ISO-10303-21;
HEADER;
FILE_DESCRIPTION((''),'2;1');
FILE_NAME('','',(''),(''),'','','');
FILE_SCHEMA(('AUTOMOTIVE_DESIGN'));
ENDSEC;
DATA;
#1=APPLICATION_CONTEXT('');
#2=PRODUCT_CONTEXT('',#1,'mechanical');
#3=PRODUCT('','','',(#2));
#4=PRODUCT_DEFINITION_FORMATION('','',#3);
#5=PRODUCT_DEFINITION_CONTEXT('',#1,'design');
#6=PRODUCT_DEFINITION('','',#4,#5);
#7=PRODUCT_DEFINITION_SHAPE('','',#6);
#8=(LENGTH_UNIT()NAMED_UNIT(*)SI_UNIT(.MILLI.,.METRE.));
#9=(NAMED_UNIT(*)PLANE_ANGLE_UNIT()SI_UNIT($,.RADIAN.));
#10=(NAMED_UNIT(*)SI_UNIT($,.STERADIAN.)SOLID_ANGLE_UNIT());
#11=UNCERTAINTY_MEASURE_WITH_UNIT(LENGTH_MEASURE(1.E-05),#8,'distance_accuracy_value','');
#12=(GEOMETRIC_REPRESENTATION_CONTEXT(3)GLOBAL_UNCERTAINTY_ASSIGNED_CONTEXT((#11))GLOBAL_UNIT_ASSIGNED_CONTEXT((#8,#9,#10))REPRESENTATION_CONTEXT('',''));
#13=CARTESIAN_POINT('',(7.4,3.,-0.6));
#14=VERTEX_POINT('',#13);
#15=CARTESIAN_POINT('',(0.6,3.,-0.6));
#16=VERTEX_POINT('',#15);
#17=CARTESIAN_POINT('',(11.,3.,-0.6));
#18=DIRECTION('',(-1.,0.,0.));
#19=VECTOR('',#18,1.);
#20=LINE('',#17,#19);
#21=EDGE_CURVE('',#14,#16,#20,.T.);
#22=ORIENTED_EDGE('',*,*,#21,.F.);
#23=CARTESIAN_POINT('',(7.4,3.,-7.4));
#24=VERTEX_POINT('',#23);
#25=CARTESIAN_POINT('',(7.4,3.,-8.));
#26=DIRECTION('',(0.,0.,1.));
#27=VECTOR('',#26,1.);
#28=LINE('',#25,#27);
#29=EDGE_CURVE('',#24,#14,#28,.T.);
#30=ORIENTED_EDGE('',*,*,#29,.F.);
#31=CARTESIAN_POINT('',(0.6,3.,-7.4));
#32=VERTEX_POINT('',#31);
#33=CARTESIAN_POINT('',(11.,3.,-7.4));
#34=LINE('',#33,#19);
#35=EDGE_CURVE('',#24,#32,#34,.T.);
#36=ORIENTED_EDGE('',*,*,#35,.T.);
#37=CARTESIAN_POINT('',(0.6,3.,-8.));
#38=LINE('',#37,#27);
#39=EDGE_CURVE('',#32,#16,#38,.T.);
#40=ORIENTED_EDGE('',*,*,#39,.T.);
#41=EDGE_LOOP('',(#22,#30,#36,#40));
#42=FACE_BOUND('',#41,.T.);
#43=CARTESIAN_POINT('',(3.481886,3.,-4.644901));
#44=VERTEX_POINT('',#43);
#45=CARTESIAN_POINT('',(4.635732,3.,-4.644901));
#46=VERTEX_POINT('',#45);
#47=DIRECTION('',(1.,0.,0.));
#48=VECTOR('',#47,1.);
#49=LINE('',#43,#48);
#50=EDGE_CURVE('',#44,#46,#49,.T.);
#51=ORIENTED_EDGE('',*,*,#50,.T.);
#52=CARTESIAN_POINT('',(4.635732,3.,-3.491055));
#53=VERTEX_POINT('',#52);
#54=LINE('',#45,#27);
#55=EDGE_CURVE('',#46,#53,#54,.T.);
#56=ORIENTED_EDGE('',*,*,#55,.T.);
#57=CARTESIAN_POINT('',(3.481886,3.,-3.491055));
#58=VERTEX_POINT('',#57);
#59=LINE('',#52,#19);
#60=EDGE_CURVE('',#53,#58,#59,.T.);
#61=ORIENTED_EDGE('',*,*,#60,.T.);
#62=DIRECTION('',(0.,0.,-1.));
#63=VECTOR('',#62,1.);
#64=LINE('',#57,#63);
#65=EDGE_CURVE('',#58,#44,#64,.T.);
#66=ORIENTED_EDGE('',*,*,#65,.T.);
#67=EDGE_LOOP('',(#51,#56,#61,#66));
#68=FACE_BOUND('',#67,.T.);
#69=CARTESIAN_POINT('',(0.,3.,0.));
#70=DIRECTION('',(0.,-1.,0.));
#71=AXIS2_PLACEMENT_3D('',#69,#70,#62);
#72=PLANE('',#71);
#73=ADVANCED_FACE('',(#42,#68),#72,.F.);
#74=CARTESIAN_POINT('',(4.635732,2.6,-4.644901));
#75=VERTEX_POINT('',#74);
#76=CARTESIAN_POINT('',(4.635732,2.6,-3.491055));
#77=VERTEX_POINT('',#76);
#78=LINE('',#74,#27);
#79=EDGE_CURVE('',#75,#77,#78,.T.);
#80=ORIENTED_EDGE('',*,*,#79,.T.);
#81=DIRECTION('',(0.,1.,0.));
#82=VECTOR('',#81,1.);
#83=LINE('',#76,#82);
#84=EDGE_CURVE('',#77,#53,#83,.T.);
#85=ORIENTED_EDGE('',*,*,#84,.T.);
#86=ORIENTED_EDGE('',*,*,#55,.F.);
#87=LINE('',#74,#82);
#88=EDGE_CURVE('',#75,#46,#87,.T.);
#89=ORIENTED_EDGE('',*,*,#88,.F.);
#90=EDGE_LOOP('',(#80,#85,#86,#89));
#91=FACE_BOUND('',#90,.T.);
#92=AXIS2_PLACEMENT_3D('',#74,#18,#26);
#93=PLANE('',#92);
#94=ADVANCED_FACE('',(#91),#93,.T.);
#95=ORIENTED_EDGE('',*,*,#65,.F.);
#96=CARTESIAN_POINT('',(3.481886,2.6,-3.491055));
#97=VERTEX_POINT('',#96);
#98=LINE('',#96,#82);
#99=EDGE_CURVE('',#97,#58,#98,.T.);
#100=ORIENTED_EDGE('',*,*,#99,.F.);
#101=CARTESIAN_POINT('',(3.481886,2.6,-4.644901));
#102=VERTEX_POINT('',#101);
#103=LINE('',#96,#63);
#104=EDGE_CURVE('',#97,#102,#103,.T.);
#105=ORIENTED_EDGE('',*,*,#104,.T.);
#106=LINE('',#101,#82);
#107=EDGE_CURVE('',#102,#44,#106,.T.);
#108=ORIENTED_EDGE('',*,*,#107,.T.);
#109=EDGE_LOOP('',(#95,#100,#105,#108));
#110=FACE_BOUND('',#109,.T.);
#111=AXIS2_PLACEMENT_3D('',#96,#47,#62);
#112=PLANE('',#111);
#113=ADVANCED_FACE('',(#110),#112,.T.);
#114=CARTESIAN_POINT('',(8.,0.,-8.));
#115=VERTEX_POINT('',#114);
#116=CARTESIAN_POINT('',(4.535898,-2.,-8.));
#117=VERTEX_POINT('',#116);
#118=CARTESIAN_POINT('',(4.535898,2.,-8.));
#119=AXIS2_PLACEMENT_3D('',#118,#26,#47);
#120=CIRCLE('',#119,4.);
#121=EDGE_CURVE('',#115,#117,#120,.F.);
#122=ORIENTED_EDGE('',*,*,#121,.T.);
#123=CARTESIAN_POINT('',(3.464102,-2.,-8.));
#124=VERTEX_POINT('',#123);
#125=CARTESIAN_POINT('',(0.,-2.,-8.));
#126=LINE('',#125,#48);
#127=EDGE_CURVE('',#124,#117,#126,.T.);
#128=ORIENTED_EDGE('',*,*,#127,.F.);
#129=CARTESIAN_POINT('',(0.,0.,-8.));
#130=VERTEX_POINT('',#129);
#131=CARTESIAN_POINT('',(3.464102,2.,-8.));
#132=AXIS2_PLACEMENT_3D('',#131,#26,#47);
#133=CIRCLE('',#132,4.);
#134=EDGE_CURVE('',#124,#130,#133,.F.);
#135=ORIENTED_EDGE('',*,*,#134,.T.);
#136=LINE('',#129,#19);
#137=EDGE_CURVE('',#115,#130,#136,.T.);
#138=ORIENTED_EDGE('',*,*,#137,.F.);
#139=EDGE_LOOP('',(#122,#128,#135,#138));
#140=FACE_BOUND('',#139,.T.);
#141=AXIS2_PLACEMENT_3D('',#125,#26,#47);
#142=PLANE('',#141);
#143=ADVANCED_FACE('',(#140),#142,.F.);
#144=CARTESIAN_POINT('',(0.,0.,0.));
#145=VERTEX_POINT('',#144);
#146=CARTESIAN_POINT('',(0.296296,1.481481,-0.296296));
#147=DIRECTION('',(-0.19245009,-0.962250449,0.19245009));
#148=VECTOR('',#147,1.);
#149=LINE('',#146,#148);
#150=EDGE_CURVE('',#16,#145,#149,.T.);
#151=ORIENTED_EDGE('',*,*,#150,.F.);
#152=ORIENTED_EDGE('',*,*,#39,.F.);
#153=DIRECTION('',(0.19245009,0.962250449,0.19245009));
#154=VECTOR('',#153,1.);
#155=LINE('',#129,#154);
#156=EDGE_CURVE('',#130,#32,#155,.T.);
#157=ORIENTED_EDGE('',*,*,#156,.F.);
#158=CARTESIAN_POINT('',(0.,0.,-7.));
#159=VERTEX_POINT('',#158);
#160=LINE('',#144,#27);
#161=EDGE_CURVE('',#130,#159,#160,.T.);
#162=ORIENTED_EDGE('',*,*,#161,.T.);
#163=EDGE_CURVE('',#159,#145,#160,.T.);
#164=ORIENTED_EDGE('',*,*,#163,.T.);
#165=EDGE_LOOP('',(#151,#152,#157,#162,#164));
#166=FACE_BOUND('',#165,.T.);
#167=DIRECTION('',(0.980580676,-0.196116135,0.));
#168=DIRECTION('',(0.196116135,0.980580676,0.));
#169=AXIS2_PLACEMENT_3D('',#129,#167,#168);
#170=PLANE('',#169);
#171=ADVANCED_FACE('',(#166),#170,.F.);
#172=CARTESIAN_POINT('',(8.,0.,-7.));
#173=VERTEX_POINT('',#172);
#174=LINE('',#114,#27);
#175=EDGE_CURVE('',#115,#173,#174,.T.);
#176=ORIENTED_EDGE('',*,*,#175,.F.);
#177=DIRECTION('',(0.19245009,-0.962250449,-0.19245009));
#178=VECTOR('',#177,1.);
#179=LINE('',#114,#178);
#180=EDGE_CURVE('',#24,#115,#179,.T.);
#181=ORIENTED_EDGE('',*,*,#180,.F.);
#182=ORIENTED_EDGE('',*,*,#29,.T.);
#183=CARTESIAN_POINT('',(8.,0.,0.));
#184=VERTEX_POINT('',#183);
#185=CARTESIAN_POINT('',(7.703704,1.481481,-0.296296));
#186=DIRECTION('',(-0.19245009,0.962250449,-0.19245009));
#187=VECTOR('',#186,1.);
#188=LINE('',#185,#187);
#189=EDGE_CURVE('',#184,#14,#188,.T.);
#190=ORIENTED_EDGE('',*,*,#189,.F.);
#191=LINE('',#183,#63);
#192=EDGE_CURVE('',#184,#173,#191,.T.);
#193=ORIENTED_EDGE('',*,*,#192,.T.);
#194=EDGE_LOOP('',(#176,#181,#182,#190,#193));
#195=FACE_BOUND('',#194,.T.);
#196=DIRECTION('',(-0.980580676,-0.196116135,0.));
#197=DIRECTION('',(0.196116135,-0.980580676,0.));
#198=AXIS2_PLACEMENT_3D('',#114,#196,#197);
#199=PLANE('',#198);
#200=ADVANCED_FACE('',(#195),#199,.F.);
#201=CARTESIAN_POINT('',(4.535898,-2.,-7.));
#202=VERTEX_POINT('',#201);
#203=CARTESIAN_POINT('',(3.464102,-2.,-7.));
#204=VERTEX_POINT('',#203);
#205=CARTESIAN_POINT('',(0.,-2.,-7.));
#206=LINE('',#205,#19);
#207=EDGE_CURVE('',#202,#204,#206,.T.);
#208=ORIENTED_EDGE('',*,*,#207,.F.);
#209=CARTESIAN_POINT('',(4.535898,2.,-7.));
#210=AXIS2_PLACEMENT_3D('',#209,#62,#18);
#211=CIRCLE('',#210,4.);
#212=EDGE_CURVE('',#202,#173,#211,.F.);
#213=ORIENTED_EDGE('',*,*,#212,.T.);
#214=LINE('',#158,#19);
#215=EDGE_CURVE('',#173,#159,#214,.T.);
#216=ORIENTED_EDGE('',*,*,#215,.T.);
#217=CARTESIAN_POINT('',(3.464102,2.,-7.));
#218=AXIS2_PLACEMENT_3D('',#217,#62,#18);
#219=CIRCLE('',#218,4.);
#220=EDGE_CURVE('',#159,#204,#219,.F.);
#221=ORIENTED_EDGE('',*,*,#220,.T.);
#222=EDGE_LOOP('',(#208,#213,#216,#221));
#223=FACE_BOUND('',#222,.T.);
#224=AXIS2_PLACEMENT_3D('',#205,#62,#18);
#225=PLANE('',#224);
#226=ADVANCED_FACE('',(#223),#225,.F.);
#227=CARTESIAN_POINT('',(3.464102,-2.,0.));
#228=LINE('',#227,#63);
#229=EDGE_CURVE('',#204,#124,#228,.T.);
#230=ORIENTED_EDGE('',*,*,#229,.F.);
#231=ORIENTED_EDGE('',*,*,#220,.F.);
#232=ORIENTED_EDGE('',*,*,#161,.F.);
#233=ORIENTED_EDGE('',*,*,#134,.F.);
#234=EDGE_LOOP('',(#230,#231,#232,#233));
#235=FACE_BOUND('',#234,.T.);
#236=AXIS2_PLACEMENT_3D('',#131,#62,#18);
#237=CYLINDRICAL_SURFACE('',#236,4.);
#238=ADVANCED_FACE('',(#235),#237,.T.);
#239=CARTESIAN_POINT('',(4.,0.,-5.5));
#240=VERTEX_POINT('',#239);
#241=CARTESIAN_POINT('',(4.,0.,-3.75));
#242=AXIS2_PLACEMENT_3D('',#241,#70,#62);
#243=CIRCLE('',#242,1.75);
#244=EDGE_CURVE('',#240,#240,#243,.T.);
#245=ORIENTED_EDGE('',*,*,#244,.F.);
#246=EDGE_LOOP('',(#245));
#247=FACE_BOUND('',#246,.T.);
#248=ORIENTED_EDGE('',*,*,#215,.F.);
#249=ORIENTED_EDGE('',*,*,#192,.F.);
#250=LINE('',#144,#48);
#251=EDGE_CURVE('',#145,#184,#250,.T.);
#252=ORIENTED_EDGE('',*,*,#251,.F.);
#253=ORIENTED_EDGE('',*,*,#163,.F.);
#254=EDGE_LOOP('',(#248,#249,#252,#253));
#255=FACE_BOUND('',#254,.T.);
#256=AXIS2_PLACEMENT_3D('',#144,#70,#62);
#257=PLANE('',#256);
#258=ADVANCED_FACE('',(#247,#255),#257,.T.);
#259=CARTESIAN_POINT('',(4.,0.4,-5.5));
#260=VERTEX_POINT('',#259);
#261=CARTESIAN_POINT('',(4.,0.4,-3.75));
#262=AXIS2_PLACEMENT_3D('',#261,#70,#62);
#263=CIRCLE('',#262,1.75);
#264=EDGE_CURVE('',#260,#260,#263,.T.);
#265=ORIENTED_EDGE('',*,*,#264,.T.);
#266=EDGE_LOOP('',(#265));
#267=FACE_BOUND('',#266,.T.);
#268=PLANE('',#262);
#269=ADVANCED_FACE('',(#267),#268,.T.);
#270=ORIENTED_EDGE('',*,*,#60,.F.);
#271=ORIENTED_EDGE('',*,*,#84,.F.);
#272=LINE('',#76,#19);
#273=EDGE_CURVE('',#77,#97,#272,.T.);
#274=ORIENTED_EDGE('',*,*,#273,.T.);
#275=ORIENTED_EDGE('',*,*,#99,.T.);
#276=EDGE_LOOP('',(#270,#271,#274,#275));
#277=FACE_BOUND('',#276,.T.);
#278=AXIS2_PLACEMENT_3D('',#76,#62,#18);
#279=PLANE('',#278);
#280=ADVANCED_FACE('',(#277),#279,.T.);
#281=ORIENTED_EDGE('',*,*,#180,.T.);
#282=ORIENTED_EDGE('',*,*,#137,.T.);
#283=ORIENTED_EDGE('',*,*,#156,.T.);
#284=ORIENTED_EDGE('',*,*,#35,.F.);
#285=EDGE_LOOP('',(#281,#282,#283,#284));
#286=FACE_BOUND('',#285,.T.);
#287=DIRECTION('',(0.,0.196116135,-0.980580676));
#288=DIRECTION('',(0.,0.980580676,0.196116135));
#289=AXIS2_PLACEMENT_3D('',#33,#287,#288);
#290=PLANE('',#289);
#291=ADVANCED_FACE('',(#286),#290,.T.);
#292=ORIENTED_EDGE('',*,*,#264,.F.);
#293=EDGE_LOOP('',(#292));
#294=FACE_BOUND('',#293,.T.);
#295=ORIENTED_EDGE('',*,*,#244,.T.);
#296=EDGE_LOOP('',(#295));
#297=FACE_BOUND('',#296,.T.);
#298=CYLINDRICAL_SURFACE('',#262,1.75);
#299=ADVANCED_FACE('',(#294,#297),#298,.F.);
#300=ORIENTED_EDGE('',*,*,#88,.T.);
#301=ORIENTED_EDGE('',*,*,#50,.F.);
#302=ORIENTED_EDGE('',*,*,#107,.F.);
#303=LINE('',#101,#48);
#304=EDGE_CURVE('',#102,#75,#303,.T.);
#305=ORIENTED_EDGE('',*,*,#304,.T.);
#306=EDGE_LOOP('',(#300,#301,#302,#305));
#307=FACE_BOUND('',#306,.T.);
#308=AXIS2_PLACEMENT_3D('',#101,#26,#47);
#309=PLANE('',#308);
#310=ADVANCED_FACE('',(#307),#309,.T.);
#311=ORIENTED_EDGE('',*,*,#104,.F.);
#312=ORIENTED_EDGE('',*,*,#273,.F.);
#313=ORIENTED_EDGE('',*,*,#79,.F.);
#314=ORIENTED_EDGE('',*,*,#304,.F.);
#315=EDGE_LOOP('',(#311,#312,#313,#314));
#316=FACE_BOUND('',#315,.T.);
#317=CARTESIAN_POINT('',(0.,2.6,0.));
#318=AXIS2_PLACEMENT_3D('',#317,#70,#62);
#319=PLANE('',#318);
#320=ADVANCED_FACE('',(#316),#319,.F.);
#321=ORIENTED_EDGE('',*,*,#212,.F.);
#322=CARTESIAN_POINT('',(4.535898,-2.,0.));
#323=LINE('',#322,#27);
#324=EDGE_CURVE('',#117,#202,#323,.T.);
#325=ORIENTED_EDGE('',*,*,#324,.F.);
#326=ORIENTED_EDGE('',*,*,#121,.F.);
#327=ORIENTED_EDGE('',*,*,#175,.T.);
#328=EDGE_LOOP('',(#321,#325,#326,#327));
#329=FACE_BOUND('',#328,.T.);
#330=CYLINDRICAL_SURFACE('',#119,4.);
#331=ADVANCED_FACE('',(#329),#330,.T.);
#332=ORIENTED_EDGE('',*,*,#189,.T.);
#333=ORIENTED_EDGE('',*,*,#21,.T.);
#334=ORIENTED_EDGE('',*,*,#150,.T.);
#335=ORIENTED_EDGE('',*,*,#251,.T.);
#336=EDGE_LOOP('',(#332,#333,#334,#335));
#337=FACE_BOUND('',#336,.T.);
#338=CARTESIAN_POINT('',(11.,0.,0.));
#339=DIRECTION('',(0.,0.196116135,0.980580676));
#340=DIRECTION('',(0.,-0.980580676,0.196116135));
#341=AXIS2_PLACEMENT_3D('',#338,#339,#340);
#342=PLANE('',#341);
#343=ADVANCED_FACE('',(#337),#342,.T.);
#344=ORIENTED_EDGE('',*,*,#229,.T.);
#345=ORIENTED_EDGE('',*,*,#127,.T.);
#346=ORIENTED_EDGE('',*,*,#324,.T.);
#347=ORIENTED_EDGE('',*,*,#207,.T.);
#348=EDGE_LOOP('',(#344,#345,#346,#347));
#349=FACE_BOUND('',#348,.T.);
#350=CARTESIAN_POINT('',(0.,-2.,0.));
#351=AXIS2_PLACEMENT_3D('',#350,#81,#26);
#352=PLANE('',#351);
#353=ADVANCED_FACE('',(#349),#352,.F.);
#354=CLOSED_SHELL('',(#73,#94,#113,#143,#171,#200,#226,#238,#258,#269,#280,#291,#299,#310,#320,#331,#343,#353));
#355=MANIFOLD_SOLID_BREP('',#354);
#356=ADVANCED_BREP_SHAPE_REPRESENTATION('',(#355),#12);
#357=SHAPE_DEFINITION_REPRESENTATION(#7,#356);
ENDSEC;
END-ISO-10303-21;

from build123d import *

# Parameters (mm, degrees)
SKETCH1_W               = 8
SKETCH1_H               = 8
BOSS_EXTRUDE1_DEPTH     = 3
CUT_EXTRUDE1_DEPTH      = 12.704699911
CUT_EXTRUDE1_DEPTH_BACK = 12.704699911
CUT_EXTRUDE2_DEPTH      = 11
SKETCH4_R               = 1.75
CUT_EXTRUDE3_DEPTH      = 0.4
SKETCH5_W               = 8
SKETCH5_H               = 1
BOSS_EXTRUDE2_DEPTH     = 2
FILLET1_R               = 4
SKETCH6_W               = 1.153846154
SKETCH6_H               = 1.153846154
CUT_EXTRUDE4_DEPTH      = 0.4


with BuildPart() as part:
    # Sketch1 → Boss-Extrude1 (new body)
    with BuildSketch(Plane(origin=(0, 0, 0), x_dir=(1, 0, 0), z_dir=(0, 1, 0))):
        with Locations((4, 4)):
            Rectangle(SKETCH1_W, SKETCH1_H)
    extrude(amount=BOSS_EXTRUDE1_DEPTH)

    # Sketch2 → Cut-Extrude1 (cut, two sides: drawn at the far end of the back side and taken through both)
    with BuildSketch(Plane.XY.offset(-CUT_EXTRUDE1_DEPTH_BACK)):
        Polygon((0, 0), (0.6, 3), (0, 3), align=None)
        Polygon((8, 0), (7.4, 3), (8, 3), align=None)
    extrude(amount=CUT_EXTRUDE1_DEPTH + CUT_EXTRUDE1_DEPTH_BACK, mode=Mode.SUBTRACT)

    # Sketch3 → Cut-Extrude2 (cut)
    with BuildSketch(Plane(origin=(0, 0, 0), x_dir=(0, 0, -1), z_dir=(1, 0, 0))):
        Polygon((0, 0), (0.6, 3), (0, 3), align=None)
        Polygon((8, 3), (7.4, 3), (8, 0), align=None)
    extrude(amount=CUT_EXTRUDE2_DEPTH, mode=Mode.SUBTRACT)

    # Sketch4 → Cut-Extrude3 (cut)
    with BuildSketch(Plane.XZ):
        with Locations(Location((4, -3.75, 0), (0, 0, 270))):
            Circle(SKETCH4_R)
    extrude(amount=-CUT_EXTRUDE3_DEPTH, mode=Mode.SUBTRACT)

    # Sketch5 → Boss-Extrude2 (add)
    with BuildSketch(Plane.XZ):
        with Locations((4, -7.5)):
            Rectangle(SKETCH5_W, SKETCH5_H)
    extrude(amount=BOSS_EXTRUDE2_DEPTH)

    # Fillet1
    # the kernel refuses this fillet: 4 mm, written as the material it takes off along each edge
    with BuildSketch(Plane(origin=(8, -2, -16.660254038), x_dir=(0, 1, 0), z_dir=(0, 0, 1)), Plane(origin=(0, -2, 1.660254038), x_dir=(0, 1, 0), z_dir=(0, 0, -1))) as fillet1_piece_1:
        with BuildLine():
            CenterArc((4, 3.464101615), FILLET1_R, 180, 60)
            Line((0, 3.464101615), (-0.08, 3.464101615))
            Line((-0.08, 3.464101615), (-0.08, 0))
            Line((-0.08, 0), (0, -0.08))
            ThreePointArc((0, -0.08), (1, -0.08), (1.96, -0.069282032))
            Line((1.96, -0.069282032), (2, 0))
        make_face()
    extrude(amount=18.320508076, mode=Mode.SUBTRACT)

    # Sketch6 → Cut-Extrude4 (cut)
    with BuildSketch(Plane(origin=(0, 3, 0), x_dir=(1, 0, 0), z_dir=(0, 1, 0))):
        with Locations((4.058809338, 4.067977948)):
            Rectangle(SKETCH6_W, SKETCH6_H)
    extrude(amount=-CUT_EXTRUDE4_DEPTH, mode=Mode.SUBTRACT)


solid = part.part
